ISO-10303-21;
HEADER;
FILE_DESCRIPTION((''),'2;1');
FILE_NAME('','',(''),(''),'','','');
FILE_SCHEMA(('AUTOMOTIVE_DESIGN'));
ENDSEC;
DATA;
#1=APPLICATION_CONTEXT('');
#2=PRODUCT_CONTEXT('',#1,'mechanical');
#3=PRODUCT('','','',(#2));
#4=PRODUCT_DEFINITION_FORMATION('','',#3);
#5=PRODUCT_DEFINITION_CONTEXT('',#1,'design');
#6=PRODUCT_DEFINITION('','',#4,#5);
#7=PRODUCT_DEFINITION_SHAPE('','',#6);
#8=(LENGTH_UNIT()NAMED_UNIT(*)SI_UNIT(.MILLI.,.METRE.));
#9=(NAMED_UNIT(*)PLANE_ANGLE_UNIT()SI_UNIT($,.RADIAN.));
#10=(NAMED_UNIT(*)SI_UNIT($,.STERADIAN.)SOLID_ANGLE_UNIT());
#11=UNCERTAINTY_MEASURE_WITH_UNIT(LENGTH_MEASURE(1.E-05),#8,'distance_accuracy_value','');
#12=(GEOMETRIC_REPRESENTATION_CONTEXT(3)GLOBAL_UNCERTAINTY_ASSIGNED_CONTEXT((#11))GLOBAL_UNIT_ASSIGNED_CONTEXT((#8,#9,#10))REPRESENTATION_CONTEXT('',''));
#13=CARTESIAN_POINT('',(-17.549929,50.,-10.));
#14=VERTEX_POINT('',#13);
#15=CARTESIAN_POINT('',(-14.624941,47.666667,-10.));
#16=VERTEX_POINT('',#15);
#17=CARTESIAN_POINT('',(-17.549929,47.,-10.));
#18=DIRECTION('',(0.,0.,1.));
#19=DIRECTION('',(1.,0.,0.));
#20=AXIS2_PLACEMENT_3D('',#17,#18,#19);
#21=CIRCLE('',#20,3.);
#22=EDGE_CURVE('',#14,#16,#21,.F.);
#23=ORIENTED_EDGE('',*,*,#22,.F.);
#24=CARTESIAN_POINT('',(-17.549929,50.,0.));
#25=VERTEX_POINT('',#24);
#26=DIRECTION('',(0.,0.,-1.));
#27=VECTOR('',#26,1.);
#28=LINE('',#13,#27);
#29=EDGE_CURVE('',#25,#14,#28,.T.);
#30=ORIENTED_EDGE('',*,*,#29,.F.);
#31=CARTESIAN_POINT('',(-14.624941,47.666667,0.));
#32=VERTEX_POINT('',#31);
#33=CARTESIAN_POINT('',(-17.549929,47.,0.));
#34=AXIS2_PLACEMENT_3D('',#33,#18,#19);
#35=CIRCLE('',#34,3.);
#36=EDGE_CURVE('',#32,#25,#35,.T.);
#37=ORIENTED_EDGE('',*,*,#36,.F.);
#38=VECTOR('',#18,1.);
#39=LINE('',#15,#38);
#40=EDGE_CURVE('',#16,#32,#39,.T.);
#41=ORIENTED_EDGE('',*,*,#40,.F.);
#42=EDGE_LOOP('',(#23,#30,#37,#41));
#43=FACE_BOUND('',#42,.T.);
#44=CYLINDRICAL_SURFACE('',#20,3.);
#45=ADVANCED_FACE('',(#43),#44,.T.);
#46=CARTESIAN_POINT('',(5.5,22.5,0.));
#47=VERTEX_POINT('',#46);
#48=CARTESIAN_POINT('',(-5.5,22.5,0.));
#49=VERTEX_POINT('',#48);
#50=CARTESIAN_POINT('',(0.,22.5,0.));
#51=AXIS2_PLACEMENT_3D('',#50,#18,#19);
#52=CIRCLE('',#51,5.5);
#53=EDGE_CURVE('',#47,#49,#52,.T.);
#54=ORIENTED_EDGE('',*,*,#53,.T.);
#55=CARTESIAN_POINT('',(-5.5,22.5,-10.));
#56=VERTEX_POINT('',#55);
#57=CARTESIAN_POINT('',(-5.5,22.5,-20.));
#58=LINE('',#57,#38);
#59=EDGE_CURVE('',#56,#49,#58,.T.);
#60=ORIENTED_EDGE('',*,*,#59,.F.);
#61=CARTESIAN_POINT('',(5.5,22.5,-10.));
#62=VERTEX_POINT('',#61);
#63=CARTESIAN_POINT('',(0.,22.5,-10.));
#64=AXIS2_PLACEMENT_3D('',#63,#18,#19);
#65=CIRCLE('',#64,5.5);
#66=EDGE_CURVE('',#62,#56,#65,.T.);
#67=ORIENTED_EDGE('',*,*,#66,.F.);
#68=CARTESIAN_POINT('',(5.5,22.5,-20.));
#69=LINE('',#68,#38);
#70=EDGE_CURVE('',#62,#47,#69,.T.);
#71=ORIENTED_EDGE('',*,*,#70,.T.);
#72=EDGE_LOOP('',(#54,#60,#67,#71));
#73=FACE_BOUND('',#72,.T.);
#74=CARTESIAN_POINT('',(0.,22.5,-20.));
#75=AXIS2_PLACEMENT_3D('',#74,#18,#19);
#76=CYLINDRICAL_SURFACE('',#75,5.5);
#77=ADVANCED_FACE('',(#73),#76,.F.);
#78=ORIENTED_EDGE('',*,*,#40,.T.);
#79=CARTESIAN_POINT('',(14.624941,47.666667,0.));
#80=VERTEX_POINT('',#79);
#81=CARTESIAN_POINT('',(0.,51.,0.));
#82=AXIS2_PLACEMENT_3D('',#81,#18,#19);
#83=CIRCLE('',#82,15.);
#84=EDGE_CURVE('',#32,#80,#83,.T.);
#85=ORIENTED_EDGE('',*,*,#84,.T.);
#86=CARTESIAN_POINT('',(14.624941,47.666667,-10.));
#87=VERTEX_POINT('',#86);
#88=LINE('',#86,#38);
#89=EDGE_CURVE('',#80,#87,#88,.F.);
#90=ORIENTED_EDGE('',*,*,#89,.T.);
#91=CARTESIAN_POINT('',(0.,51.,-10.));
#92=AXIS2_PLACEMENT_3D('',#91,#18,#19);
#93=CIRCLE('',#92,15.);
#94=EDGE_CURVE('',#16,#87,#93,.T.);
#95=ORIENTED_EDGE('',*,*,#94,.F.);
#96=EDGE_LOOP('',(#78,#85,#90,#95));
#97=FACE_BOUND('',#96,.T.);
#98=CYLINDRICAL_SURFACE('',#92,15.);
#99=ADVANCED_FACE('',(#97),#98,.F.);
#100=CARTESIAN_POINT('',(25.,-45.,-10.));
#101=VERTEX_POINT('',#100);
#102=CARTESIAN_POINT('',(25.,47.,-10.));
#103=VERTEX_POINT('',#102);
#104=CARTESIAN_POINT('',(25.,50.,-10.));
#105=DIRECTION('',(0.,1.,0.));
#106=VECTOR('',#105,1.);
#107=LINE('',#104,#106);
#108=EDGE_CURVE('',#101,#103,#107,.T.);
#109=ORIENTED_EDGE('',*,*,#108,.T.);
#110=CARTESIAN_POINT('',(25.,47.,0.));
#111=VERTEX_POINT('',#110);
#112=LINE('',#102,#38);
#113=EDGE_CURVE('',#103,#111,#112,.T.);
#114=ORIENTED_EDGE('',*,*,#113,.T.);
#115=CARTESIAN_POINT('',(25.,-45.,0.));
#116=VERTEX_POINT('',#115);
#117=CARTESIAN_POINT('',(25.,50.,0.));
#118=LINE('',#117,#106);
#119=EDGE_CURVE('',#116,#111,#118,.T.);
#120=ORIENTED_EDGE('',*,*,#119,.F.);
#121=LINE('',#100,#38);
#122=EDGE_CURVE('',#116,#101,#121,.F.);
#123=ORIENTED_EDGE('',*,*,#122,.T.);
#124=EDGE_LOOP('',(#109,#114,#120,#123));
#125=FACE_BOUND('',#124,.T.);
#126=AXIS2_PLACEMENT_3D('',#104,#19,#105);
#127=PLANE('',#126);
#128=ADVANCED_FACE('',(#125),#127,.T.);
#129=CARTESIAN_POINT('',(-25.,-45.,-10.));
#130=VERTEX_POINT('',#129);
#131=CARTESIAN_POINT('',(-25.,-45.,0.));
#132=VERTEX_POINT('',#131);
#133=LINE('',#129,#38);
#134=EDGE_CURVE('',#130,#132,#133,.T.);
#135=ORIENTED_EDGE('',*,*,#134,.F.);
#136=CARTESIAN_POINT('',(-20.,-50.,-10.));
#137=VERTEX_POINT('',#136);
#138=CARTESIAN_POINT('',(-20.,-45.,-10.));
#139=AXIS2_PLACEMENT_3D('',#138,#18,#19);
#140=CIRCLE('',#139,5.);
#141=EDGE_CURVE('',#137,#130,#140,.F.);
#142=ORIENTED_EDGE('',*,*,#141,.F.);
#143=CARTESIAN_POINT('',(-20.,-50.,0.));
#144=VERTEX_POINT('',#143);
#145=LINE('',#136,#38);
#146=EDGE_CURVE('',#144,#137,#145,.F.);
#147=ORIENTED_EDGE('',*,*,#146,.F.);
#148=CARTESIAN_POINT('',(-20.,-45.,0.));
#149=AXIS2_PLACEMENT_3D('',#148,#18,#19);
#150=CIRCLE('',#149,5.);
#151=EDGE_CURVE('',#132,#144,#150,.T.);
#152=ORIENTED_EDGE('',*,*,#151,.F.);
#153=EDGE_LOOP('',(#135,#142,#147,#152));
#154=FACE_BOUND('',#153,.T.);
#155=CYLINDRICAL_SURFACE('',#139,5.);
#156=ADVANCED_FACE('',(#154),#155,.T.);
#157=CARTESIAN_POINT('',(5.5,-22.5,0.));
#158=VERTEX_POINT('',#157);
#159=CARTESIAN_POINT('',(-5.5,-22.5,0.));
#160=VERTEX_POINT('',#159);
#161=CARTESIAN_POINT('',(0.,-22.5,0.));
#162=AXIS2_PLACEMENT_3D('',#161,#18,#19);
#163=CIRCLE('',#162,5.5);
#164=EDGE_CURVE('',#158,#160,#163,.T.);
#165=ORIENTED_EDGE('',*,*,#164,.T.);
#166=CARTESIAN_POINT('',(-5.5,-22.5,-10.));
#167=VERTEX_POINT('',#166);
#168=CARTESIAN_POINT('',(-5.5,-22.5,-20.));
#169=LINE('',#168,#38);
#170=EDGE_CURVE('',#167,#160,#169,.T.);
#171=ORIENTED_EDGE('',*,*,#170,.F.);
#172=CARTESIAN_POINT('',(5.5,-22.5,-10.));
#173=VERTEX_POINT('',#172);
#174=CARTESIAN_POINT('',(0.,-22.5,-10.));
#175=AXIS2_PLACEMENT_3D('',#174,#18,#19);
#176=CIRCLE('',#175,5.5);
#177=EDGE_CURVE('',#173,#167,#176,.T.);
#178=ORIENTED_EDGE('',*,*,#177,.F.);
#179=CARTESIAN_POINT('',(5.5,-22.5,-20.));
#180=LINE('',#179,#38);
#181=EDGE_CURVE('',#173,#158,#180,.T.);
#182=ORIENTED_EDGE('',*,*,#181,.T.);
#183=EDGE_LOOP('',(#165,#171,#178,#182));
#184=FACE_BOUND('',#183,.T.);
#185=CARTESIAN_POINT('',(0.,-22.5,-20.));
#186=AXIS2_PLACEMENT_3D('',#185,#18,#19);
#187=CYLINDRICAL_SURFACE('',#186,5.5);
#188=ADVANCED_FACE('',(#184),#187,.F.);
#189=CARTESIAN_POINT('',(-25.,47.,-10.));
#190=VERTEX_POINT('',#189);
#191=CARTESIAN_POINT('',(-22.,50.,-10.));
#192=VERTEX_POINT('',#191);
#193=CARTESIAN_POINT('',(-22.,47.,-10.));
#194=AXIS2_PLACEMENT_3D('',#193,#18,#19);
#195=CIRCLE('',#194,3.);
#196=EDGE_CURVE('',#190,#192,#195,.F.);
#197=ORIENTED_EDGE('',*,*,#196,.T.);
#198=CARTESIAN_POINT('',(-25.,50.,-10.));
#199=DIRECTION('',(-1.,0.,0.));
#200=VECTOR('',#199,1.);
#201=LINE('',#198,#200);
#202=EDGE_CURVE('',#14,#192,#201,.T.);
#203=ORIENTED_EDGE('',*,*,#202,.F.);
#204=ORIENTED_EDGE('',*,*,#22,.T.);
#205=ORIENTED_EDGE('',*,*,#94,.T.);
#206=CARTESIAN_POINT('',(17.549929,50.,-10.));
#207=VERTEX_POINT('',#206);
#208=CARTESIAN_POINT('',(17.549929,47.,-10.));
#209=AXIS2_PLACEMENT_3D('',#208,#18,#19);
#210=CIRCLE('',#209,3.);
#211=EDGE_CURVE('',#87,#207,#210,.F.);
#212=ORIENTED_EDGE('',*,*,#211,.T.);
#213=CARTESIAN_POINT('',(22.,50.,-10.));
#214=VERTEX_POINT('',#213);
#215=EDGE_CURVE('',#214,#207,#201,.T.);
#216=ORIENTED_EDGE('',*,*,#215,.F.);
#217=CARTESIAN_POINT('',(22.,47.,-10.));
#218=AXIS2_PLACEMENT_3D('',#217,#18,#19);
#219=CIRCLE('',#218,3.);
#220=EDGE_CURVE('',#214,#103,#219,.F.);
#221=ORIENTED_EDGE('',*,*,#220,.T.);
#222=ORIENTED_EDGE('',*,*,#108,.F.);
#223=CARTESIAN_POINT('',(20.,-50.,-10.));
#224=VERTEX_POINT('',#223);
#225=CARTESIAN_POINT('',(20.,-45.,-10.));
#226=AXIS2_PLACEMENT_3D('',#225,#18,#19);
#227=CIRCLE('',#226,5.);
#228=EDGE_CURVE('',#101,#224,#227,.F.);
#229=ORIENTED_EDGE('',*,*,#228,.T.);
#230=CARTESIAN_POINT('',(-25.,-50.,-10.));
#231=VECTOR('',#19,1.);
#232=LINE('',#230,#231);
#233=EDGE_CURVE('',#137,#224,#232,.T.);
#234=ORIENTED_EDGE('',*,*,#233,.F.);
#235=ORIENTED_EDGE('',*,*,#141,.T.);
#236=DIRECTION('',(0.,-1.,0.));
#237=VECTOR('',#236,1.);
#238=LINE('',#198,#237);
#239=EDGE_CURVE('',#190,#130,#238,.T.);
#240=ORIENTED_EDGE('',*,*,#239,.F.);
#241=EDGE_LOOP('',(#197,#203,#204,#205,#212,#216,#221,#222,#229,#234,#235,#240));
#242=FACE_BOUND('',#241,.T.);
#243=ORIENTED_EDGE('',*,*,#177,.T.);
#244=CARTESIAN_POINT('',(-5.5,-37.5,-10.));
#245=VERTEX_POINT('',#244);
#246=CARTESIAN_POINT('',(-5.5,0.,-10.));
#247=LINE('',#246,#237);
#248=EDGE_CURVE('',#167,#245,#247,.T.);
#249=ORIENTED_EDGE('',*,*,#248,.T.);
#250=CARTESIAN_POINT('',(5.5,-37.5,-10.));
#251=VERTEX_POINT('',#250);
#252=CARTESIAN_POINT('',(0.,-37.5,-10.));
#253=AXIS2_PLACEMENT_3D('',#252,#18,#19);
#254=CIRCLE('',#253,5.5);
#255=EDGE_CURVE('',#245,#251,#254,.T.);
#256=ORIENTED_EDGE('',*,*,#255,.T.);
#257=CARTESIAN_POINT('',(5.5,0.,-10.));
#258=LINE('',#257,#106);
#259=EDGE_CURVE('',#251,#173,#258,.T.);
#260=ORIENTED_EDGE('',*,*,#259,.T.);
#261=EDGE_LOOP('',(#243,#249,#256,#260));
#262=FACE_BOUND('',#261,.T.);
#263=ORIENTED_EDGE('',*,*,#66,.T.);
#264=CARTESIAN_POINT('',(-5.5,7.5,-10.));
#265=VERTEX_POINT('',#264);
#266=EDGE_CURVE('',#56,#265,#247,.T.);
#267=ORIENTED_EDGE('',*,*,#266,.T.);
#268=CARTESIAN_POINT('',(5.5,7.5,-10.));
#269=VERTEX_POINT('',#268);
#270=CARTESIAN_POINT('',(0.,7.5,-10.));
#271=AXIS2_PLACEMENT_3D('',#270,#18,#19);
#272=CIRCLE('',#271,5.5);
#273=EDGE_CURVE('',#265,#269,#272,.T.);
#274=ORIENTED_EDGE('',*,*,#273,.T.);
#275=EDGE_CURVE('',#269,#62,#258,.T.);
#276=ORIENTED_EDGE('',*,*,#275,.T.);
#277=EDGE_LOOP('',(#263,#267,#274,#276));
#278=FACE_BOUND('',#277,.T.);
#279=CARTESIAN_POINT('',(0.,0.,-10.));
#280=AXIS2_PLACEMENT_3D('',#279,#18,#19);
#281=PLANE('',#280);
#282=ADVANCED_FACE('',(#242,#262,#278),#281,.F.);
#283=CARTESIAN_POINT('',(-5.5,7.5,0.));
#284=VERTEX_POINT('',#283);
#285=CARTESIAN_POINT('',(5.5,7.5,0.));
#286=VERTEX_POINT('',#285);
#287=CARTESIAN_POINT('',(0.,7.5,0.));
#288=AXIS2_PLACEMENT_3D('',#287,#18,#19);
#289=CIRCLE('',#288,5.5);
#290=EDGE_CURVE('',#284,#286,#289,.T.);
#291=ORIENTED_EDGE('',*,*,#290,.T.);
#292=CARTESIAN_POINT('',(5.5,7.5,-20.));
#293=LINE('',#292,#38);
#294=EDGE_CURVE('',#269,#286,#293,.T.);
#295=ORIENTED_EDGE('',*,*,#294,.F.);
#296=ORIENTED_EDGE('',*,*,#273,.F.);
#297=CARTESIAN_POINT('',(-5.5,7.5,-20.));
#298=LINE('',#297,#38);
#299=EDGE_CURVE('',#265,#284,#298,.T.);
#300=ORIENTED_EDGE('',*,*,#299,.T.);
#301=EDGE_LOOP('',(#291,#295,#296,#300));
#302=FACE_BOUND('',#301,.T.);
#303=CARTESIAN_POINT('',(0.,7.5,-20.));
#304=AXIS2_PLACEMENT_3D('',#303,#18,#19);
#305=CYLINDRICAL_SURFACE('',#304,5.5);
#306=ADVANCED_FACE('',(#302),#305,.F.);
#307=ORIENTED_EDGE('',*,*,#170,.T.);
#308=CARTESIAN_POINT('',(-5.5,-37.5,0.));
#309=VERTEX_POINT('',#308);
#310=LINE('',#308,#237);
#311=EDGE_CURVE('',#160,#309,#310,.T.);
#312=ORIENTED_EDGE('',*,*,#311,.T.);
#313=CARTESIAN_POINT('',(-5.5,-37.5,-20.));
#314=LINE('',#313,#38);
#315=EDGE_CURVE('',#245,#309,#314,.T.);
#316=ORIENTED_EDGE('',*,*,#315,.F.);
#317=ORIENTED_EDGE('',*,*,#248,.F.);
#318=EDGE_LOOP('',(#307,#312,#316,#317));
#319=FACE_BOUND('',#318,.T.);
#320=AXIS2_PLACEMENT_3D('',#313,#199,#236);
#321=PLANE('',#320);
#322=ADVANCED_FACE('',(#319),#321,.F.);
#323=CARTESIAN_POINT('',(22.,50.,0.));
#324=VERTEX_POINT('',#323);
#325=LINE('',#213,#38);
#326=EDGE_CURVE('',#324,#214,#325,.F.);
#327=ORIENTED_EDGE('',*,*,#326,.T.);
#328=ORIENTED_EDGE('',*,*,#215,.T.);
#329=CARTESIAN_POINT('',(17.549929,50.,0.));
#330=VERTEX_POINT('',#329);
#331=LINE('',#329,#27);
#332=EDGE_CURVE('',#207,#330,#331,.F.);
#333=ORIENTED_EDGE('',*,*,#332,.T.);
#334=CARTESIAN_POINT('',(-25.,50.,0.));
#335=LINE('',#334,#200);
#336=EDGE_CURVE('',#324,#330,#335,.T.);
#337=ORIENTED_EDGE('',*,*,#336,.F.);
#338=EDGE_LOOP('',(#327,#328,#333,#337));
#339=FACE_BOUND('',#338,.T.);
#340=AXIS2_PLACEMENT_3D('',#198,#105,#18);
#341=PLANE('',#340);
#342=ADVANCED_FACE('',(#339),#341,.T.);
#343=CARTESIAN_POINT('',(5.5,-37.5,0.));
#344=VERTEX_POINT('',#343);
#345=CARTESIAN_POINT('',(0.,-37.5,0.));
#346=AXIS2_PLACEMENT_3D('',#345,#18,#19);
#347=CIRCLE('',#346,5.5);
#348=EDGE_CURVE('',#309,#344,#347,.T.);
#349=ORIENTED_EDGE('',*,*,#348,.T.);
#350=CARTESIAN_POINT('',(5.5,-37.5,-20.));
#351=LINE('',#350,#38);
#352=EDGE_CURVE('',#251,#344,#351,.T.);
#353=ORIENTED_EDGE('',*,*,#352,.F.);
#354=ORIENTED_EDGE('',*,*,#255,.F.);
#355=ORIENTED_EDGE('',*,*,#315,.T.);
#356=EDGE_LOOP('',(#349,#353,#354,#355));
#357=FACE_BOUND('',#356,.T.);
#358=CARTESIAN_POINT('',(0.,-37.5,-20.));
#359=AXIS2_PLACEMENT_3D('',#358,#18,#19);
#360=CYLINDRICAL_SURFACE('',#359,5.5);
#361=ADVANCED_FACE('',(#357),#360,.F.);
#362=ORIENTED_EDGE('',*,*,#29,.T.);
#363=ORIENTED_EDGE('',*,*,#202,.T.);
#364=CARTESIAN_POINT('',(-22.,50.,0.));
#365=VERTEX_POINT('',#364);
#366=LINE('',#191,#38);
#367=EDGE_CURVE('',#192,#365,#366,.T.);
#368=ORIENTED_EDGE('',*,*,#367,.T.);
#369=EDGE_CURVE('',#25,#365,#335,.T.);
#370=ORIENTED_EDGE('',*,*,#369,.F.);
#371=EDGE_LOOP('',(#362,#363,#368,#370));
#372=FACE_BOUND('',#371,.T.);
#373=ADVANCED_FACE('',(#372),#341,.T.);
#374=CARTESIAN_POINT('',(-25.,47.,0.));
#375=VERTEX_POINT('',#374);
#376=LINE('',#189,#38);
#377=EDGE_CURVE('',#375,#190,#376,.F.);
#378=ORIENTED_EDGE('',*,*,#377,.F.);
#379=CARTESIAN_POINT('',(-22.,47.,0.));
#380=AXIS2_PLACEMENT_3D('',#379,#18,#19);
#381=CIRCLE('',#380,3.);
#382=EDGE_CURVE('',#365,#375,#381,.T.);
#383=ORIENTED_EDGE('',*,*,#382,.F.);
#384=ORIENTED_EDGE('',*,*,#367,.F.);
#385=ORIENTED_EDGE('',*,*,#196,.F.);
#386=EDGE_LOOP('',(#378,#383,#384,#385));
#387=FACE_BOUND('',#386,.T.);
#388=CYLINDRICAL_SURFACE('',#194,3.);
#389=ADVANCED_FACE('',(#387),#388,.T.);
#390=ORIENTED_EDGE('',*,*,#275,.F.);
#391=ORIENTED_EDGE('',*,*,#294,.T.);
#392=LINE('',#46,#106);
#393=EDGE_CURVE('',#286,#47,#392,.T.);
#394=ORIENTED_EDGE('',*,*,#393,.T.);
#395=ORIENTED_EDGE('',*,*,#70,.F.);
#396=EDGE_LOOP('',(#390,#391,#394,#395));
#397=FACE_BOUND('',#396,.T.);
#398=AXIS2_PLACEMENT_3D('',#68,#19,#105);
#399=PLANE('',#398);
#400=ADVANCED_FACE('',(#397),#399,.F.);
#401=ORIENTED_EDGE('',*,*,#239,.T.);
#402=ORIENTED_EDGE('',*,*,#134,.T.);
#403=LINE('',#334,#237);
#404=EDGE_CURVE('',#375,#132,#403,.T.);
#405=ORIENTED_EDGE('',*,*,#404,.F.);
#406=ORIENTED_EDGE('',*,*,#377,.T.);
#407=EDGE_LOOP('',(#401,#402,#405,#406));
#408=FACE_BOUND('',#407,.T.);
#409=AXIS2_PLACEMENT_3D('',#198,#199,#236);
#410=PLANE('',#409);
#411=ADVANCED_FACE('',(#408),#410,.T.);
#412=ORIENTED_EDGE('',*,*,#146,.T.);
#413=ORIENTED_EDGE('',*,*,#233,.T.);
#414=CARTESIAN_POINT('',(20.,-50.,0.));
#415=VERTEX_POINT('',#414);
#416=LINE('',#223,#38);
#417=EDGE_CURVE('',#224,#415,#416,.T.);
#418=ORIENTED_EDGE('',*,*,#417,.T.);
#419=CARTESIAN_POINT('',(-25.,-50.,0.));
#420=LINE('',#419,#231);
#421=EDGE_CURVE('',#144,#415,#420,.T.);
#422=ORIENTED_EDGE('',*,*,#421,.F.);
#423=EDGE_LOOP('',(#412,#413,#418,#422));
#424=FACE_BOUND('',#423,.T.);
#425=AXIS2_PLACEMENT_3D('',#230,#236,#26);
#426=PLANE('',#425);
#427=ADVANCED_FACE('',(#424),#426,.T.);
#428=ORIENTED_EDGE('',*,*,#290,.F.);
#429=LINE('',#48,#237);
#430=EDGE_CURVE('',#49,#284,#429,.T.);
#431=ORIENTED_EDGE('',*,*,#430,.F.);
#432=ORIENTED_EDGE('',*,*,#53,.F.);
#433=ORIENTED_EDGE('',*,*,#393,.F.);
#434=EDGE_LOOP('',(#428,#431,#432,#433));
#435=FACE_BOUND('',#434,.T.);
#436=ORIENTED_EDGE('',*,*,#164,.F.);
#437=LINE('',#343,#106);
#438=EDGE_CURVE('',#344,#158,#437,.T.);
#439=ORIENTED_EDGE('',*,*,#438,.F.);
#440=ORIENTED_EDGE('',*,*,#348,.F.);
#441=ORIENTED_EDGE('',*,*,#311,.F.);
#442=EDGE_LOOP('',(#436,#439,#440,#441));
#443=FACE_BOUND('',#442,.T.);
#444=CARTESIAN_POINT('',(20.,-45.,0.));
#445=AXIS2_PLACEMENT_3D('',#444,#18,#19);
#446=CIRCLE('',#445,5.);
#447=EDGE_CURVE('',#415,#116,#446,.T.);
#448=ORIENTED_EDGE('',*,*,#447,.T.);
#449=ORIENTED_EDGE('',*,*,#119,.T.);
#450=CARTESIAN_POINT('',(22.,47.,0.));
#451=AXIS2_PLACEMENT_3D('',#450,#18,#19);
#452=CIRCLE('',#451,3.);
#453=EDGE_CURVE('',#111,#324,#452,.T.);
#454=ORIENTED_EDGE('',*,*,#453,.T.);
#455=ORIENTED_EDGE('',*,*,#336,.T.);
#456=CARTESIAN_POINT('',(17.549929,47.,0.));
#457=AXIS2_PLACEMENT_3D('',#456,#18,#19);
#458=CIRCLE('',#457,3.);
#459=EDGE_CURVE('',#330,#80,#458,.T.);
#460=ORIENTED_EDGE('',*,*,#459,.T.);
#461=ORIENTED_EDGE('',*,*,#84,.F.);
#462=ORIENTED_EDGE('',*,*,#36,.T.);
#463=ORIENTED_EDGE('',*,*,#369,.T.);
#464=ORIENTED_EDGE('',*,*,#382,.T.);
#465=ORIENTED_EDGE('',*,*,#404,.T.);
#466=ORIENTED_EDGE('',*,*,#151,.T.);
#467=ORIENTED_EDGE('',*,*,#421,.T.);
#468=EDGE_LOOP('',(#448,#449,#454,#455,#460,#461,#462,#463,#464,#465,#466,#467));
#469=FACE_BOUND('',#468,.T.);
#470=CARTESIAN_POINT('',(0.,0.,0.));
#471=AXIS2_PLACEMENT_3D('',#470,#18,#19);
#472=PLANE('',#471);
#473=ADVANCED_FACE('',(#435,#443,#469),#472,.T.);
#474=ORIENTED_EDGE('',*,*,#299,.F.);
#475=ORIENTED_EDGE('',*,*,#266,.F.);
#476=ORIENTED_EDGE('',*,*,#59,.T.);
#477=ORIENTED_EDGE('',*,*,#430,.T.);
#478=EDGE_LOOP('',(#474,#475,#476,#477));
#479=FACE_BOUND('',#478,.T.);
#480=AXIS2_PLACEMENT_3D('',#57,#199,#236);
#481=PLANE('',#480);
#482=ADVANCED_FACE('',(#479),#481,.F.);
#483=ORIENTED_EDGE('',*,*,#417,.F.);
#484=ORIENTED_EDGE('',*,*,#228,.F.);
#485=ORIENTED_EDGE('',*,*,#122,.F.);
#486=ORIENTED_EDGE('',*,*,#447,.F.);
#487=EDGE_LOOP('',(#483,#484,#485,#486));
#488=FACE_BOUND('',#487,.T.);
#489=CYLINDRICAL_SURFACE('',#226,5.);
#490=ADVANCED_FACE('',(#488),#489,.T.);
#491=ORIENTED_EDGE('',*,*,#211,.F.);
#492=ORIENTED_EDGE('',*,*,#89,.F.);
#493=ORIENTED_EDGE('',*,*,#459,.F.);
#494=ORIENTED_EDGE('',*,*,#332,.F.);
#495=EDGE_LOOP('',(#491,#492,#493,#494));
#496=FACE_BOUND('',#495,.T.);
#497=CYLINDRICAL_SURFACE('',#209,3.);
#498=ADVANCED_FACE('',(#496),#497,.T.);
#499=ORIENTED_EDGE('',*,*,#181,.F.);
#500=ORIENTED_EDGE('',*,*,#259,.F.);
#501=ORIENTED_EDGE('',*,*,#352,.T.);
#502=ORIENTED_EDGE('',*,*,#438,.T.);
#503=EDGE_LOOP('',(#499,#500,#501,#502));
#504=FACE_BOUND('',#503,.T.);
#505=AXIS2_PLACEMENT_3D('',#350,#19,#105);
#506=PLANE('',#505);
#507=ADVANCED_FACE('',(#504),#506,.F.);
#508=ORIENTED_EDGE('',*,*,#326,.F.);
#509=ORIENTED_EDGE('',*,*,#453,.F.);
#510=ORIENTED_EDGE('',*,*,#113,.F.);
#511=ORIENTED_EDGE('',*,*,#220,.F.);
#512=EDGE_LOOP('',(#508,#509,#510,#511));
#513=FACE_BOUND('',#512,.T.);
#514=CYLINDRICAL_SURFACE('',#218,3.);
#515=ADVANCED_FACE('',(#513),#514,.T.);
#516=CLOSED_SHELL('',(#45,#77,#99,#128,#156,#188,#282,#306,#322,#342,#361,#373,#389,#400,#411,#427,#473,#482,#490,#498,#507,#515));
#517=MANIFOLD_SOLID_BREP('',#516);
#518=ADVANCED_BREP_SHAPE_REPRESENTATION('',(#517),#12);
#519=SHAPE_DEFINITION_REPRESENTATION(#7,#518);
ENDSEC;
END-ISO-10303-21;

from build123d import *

# Parameters (mm, degrees)
IZIM1_W               = 50
IZIM1_H               = 100
TABAN_FLAN_1_DEPTH    = 10
KES_EKSTR_ZYON1_DEPTH = 20
RADYUS1_R             = 5
IZIM7_R               = 15
KES_EKSTR_ZYON2_DEPTH = 10
RADYUS2_R             = 3


# Sheet-metal steps are written as plain solids
with BuildPart() as part:
    # Çizim1 → Taban-Flanş1 (new body)
    with BuildSketch(Plane.XY):
        Rectangle(IZIM1_W, IZIM1_H)
    extrude(amount=-TABAN_FLAN_1_DEPTH)

    # Çizim6 → Kes-Ekstrüzyon1 (cut)
    with BuildSketch(Plane.XY):
        with BuildLine():
            Line((5.5, 22.5), (5.5, 7.5))
            ThreePointArc((5.5, 7.5), (0, 2), (-5.5, 7.5))
            Line((-5.5, 7.5), (-5.5, 22.5))
            ThreePointArc((-5.5, 22.5), (0, 28), (5.5, 22.5))
        make_face()
        with BuildLine():
            Line((-5.5, -37.5), (-5.5, -22.5))
            ThreePointArc((-5.5, -22.5), (0, -17), (5.5, -22.5))
            Line((5.5, -22.5), (5.5, -37.5))
            ThreePointArc((5.5, -37.5), (0, -43), (-5.5, -37.5))
        make_face()
    extrude(amount=-KES_EKSTR_ZYON1_DEPTH, mode=Mode.SUBTRACT)

    # Radyus1
    radyus1_edges = [part.edges().sort_by_distance(p)[0] for p in [
        (25, -50, -5),
        (-25, -50, -5),
    ]]
    fillet(radyus1_edges, radius=RADYUS1_R)

    # Çizim7 → Kes-Ekstrüzyon2 (cut)
    with BuildSketch(Plane.XY):
        with Locations((0, 51)):
            Circle(IZIM7_R)
    extrude(amount=-KES_EKSTR_ZYON2_DEPTH, mode=Mode.SUBTRACT)

    # Radyus2
    radyus2_edges = [part.edges().sort_by_distance(p)[0] for p in [
        (-14.966629547, 50, -5),
        (14.966629547, 50, -5),
        (-25, 50, -5),
        (25, 50, -5),
    ]]
    fillet(radyus2_edges, radius=RADYUS2_R)


solid = part.part
